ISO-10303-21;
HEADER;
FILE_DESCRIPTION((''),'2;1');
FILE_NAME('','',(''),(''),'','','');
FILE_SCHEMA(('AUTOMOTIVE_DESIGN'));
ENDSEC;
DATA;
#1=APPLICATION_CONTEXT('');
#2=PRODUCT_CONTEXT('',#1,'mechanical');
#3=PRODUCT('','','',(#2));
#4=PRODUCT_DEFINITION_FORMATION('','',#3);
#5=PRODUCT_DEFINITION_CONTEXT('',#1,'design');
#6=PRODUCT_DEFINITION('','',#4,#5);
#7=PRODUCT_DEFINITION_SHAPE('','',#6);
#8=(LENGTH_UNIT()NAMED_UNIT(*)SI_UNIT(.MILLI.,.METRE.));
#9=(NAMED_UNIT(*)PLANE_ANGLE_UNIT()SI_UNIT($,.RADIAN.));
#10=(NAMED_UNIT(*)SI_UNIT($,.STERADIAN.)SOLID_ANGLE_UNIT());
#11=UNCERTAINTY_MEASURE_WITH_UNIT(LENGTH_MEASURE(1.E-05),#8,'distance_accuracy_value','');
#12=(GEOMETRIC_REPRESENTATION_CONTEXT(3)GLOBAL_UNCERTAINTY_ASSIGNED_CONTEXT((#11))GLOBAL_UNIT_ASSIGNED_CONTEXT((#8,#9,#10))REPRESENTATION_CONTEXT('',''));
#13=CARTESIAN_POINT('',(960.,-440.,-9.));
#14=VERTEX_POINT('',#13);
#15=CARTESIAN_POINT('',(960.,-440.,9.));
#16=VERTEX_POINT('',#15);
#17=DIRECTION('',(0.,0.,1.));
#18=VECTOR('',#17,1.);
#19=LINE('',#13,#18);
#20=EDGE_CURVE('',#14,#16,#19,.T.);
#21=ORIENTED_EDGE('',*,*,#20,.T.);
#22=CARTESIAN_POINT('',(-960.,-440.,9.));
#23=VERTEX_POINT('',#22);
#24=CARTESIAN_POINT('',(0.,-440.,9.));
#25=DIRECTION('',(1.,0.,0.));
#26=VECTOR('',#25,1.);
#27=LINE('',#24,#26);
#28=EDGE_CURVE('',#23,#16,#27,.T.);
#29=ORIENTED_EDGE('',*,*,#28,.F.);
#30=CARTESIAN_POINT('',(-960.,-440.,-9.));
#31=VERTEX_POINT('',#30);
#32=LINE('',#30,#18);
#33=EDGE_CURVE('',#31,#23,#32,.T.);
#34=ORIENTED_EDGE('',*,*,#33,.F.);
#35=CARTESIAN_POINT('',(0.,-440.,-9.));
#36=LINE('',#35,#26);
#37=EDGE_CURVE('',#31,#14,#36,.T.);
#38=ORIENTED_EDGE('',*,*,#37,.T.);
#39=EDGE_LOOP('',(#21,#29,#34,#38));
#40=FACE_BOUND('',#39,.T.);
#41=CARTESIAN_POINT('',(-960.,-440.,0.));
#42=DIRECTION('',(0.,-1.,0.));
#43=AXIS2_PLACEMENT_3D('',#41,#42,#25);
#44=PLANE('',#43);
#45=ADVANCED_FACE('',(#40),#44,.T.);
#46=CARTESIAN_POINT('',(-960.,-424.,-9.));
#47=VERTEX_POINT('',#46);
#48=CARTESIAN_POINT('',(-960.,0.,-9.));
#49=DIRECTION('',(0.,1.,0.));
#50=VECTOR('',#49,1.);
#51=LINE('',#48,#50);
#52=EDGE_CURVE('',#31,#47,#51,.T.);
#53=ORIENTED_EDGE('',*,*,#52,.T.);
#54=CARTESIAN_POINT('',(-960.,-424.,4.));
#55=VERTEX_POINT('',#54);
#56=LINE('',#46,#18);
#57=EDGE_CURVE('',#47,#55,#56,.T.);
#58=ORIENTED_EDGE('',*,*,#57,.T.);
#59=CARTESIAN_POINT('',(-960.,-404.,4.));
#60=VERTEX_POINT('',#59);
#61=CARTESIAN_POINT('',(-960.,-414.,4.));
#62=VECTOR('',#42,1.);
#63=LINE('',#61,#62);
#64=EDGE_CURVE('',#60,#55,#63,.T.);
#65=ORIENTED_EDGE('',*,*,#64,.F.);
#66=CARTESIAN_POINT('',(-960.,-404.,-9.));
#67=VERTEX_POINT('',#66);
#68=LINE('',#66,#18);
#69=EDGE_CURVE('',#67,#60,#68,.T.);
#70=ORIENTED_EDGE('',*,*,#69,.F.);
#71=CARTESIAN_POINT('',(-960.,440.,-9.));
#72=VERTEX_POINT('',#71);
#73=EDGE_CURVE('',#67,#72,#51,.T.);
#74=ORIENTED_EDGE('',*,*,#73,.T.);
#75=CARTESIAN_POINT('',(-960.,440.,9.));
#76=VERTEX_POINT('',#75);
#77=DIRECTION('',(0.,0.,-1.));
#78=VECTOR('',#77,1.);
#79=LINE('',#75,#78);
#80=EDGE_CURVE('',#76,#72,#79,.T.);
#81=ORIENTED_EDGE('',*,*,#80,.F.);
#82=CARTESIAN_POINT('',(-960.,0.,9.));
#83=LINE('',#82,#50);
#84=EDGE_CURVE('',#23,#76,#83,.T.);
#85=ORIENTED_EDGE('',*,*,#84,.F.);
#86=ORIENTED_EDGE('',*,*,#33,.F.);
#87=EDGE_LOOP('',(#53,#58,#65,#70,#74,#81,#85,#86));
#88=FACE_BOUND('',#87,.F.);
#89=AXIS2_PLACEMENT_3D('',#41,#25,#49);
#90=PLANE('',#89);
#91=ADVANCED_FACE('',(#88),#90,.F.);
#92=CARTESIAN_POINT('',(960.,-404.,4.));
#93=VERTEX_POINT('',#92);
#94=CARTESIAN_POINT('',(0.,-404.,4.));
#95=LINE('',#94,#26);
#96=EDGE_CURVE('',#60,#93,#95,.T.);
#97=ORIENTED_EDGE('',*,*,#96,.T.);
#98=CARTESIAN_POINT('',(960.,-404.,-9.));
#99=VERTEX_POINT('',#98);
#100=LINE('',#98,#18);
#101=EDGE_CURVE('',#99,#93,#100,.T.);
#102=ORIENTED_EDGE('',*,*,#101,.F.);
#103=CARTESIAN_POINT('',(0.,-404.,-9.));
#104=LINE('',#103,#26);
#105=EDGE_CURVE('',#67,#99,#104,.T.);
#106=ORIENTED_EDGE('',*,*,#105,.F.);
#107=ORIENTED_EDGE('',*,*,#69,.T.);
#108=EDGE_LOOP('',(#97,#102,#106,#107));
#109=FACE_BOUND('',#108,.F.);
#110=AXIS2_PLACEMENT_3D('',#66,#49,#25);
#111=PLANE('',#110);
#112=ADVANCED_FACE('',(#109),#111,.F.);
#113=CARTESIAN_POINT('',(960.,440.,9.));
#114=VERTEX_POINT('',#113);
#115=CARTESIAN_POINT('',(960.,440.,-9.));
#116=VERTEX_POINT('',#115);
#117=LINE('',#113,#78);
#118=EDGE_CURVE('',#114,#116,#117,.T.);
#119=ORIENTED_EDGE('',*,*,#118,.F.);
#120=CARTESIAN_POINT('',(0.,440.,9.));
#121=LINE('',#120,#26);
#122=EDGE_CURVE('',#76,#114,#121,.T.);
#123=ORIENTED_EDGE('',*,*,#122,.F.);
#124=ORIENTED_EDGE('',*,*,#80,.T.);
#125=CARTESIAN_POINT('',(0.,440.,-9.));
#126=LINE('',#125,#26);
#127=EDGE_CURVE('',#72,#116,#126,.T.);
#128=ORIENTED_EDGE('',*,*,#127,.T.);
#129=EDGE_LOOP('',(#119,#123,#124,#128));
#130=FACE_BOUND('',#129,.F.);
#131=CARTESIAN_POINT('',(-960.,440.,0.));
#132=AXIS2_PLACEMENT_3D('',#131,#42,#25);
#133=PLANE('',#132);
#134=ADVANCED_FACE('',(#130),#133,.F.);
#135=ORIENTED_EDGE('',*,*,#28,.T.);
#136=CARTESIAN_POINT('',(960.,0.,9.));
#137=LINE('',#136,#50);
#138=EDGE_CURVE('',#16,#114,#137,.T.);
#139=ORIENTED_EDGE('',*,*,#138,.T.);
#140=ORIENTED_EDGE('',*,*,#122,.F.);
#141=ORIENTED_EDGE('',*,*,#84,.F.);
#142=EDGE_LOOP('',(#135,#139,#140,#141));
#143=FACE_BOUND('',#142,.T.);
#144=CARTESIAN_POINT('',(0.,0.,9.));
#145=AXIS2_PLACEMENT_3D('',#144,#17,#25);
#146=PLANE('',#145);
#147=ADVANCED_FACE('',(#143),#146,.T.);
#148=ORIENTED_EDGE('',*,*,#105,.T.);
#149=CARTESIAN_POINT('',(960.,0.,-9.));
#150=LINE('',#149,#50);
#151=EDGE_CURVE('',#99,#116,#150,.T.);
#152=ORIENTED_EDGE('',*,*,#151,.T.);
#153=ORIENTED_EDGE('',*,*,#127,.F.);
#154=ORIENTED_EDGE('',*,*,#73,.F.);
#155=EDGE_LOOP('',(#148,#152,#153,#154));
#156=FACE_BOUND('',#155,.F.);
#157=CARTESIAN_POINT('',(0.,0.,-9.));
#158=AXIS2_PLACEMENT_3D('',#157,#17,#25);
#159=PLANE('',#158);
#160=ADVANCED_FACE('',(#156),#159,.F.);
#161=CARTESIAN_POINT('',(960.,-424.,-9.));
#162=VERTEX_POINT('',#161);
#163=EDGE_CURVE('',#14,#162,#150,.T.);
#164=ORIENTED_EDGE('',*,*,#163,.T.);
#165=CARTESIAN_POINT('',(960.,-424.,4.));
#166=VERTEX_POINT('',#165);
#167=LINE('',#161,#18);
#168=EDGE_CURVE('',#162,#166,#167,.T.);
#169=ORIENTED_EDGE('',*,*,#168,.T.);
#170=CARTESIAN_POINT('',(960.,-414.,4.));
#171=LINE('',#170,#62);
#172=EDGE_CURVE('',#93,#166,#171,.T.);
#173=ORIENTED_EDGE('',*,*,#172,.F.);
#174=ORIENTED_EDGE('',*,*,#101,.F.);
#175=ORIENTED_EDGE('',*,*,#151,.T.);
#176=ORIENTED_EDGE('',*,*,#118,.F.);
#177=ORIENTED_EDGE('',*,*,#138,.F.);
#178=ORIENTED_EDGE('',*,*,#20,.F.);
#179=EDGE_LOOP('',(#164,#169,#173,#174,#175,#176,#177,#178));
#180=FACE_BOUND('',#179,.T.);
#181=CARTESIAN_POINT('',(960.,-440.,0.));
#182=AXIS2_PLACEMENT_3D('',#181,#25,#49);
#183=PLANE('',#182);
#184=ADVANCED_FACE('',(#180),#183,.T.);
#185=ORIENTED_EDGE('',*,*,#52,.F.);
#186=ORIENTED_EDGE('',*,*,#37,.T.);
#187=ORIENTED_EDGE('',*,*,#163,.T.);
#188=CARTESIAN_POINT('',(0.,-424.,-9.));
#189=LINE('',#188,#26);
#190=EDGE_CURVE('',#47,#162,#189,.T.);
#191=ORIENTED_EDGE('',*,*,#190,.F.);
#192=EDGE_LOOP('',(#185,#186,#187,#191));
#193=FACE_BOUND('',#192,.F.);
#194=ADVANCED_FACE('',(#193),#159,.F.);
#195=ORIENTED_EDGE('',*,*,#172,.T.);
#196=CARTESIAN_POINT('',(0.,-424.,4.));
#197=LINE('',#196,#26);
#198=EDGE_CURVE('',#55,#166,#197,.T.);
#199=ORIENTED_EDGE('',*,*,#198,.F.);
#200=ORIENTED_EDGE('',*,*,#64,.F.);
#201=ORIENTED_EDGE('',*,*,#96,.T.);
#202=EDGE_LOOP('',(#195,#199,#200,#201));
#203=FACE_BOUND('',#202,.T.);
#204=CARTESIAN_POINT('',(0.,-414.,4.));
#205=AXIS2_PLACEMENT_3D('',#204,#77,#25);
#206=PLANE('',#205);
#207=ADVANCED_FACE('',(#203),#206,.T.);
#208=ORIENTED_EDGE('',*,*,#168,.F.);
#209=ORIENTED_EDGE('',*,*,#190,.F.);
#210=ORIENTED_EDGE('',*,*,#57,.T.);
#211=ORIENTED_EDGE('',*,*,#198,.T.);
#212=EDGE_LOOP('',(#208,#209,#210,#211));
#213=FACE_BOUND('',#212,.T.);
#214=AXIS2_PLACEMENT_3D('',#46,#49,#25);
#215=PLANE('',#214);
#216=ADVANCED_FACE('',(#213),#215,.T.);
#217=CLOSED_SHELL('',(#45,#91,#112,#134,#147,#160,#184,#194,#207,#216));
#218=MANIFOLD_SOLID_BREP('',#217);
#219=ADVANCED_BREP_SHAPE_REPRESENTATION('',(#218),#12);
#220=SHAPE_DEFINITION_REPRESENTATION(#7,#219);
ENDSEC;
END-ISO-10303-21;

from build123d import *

# Parameters (mm, degrees)
F0_W     = 1920
F0_H     = 880
F1_DEPTH = 9
F2_W     = 1920
F2_H     = 20
F3_DEPTH = 13


with BuildPart() as f1:
    # F0 (on Top) → F1 (new body, symmetric)
    with BuildSketch(Plane.XY):
        Rectangle(F0_W, F0_H)
    extrude(amount=F1_DEPTH, both=True)

    # F2 (on face) → F3 (cut)
    with BuildSketch(Plane(origin=(0, 0, -9), x_dir=(1, 0, 0), z_dir=(0, 0, -1))):
        with Locations((0, 414)):
            Rectangle(F2_W, F2_H)
    extrude(amount=-F3_DEPTH, mode=Mode.SUBTRACT)


solid = f1.part
